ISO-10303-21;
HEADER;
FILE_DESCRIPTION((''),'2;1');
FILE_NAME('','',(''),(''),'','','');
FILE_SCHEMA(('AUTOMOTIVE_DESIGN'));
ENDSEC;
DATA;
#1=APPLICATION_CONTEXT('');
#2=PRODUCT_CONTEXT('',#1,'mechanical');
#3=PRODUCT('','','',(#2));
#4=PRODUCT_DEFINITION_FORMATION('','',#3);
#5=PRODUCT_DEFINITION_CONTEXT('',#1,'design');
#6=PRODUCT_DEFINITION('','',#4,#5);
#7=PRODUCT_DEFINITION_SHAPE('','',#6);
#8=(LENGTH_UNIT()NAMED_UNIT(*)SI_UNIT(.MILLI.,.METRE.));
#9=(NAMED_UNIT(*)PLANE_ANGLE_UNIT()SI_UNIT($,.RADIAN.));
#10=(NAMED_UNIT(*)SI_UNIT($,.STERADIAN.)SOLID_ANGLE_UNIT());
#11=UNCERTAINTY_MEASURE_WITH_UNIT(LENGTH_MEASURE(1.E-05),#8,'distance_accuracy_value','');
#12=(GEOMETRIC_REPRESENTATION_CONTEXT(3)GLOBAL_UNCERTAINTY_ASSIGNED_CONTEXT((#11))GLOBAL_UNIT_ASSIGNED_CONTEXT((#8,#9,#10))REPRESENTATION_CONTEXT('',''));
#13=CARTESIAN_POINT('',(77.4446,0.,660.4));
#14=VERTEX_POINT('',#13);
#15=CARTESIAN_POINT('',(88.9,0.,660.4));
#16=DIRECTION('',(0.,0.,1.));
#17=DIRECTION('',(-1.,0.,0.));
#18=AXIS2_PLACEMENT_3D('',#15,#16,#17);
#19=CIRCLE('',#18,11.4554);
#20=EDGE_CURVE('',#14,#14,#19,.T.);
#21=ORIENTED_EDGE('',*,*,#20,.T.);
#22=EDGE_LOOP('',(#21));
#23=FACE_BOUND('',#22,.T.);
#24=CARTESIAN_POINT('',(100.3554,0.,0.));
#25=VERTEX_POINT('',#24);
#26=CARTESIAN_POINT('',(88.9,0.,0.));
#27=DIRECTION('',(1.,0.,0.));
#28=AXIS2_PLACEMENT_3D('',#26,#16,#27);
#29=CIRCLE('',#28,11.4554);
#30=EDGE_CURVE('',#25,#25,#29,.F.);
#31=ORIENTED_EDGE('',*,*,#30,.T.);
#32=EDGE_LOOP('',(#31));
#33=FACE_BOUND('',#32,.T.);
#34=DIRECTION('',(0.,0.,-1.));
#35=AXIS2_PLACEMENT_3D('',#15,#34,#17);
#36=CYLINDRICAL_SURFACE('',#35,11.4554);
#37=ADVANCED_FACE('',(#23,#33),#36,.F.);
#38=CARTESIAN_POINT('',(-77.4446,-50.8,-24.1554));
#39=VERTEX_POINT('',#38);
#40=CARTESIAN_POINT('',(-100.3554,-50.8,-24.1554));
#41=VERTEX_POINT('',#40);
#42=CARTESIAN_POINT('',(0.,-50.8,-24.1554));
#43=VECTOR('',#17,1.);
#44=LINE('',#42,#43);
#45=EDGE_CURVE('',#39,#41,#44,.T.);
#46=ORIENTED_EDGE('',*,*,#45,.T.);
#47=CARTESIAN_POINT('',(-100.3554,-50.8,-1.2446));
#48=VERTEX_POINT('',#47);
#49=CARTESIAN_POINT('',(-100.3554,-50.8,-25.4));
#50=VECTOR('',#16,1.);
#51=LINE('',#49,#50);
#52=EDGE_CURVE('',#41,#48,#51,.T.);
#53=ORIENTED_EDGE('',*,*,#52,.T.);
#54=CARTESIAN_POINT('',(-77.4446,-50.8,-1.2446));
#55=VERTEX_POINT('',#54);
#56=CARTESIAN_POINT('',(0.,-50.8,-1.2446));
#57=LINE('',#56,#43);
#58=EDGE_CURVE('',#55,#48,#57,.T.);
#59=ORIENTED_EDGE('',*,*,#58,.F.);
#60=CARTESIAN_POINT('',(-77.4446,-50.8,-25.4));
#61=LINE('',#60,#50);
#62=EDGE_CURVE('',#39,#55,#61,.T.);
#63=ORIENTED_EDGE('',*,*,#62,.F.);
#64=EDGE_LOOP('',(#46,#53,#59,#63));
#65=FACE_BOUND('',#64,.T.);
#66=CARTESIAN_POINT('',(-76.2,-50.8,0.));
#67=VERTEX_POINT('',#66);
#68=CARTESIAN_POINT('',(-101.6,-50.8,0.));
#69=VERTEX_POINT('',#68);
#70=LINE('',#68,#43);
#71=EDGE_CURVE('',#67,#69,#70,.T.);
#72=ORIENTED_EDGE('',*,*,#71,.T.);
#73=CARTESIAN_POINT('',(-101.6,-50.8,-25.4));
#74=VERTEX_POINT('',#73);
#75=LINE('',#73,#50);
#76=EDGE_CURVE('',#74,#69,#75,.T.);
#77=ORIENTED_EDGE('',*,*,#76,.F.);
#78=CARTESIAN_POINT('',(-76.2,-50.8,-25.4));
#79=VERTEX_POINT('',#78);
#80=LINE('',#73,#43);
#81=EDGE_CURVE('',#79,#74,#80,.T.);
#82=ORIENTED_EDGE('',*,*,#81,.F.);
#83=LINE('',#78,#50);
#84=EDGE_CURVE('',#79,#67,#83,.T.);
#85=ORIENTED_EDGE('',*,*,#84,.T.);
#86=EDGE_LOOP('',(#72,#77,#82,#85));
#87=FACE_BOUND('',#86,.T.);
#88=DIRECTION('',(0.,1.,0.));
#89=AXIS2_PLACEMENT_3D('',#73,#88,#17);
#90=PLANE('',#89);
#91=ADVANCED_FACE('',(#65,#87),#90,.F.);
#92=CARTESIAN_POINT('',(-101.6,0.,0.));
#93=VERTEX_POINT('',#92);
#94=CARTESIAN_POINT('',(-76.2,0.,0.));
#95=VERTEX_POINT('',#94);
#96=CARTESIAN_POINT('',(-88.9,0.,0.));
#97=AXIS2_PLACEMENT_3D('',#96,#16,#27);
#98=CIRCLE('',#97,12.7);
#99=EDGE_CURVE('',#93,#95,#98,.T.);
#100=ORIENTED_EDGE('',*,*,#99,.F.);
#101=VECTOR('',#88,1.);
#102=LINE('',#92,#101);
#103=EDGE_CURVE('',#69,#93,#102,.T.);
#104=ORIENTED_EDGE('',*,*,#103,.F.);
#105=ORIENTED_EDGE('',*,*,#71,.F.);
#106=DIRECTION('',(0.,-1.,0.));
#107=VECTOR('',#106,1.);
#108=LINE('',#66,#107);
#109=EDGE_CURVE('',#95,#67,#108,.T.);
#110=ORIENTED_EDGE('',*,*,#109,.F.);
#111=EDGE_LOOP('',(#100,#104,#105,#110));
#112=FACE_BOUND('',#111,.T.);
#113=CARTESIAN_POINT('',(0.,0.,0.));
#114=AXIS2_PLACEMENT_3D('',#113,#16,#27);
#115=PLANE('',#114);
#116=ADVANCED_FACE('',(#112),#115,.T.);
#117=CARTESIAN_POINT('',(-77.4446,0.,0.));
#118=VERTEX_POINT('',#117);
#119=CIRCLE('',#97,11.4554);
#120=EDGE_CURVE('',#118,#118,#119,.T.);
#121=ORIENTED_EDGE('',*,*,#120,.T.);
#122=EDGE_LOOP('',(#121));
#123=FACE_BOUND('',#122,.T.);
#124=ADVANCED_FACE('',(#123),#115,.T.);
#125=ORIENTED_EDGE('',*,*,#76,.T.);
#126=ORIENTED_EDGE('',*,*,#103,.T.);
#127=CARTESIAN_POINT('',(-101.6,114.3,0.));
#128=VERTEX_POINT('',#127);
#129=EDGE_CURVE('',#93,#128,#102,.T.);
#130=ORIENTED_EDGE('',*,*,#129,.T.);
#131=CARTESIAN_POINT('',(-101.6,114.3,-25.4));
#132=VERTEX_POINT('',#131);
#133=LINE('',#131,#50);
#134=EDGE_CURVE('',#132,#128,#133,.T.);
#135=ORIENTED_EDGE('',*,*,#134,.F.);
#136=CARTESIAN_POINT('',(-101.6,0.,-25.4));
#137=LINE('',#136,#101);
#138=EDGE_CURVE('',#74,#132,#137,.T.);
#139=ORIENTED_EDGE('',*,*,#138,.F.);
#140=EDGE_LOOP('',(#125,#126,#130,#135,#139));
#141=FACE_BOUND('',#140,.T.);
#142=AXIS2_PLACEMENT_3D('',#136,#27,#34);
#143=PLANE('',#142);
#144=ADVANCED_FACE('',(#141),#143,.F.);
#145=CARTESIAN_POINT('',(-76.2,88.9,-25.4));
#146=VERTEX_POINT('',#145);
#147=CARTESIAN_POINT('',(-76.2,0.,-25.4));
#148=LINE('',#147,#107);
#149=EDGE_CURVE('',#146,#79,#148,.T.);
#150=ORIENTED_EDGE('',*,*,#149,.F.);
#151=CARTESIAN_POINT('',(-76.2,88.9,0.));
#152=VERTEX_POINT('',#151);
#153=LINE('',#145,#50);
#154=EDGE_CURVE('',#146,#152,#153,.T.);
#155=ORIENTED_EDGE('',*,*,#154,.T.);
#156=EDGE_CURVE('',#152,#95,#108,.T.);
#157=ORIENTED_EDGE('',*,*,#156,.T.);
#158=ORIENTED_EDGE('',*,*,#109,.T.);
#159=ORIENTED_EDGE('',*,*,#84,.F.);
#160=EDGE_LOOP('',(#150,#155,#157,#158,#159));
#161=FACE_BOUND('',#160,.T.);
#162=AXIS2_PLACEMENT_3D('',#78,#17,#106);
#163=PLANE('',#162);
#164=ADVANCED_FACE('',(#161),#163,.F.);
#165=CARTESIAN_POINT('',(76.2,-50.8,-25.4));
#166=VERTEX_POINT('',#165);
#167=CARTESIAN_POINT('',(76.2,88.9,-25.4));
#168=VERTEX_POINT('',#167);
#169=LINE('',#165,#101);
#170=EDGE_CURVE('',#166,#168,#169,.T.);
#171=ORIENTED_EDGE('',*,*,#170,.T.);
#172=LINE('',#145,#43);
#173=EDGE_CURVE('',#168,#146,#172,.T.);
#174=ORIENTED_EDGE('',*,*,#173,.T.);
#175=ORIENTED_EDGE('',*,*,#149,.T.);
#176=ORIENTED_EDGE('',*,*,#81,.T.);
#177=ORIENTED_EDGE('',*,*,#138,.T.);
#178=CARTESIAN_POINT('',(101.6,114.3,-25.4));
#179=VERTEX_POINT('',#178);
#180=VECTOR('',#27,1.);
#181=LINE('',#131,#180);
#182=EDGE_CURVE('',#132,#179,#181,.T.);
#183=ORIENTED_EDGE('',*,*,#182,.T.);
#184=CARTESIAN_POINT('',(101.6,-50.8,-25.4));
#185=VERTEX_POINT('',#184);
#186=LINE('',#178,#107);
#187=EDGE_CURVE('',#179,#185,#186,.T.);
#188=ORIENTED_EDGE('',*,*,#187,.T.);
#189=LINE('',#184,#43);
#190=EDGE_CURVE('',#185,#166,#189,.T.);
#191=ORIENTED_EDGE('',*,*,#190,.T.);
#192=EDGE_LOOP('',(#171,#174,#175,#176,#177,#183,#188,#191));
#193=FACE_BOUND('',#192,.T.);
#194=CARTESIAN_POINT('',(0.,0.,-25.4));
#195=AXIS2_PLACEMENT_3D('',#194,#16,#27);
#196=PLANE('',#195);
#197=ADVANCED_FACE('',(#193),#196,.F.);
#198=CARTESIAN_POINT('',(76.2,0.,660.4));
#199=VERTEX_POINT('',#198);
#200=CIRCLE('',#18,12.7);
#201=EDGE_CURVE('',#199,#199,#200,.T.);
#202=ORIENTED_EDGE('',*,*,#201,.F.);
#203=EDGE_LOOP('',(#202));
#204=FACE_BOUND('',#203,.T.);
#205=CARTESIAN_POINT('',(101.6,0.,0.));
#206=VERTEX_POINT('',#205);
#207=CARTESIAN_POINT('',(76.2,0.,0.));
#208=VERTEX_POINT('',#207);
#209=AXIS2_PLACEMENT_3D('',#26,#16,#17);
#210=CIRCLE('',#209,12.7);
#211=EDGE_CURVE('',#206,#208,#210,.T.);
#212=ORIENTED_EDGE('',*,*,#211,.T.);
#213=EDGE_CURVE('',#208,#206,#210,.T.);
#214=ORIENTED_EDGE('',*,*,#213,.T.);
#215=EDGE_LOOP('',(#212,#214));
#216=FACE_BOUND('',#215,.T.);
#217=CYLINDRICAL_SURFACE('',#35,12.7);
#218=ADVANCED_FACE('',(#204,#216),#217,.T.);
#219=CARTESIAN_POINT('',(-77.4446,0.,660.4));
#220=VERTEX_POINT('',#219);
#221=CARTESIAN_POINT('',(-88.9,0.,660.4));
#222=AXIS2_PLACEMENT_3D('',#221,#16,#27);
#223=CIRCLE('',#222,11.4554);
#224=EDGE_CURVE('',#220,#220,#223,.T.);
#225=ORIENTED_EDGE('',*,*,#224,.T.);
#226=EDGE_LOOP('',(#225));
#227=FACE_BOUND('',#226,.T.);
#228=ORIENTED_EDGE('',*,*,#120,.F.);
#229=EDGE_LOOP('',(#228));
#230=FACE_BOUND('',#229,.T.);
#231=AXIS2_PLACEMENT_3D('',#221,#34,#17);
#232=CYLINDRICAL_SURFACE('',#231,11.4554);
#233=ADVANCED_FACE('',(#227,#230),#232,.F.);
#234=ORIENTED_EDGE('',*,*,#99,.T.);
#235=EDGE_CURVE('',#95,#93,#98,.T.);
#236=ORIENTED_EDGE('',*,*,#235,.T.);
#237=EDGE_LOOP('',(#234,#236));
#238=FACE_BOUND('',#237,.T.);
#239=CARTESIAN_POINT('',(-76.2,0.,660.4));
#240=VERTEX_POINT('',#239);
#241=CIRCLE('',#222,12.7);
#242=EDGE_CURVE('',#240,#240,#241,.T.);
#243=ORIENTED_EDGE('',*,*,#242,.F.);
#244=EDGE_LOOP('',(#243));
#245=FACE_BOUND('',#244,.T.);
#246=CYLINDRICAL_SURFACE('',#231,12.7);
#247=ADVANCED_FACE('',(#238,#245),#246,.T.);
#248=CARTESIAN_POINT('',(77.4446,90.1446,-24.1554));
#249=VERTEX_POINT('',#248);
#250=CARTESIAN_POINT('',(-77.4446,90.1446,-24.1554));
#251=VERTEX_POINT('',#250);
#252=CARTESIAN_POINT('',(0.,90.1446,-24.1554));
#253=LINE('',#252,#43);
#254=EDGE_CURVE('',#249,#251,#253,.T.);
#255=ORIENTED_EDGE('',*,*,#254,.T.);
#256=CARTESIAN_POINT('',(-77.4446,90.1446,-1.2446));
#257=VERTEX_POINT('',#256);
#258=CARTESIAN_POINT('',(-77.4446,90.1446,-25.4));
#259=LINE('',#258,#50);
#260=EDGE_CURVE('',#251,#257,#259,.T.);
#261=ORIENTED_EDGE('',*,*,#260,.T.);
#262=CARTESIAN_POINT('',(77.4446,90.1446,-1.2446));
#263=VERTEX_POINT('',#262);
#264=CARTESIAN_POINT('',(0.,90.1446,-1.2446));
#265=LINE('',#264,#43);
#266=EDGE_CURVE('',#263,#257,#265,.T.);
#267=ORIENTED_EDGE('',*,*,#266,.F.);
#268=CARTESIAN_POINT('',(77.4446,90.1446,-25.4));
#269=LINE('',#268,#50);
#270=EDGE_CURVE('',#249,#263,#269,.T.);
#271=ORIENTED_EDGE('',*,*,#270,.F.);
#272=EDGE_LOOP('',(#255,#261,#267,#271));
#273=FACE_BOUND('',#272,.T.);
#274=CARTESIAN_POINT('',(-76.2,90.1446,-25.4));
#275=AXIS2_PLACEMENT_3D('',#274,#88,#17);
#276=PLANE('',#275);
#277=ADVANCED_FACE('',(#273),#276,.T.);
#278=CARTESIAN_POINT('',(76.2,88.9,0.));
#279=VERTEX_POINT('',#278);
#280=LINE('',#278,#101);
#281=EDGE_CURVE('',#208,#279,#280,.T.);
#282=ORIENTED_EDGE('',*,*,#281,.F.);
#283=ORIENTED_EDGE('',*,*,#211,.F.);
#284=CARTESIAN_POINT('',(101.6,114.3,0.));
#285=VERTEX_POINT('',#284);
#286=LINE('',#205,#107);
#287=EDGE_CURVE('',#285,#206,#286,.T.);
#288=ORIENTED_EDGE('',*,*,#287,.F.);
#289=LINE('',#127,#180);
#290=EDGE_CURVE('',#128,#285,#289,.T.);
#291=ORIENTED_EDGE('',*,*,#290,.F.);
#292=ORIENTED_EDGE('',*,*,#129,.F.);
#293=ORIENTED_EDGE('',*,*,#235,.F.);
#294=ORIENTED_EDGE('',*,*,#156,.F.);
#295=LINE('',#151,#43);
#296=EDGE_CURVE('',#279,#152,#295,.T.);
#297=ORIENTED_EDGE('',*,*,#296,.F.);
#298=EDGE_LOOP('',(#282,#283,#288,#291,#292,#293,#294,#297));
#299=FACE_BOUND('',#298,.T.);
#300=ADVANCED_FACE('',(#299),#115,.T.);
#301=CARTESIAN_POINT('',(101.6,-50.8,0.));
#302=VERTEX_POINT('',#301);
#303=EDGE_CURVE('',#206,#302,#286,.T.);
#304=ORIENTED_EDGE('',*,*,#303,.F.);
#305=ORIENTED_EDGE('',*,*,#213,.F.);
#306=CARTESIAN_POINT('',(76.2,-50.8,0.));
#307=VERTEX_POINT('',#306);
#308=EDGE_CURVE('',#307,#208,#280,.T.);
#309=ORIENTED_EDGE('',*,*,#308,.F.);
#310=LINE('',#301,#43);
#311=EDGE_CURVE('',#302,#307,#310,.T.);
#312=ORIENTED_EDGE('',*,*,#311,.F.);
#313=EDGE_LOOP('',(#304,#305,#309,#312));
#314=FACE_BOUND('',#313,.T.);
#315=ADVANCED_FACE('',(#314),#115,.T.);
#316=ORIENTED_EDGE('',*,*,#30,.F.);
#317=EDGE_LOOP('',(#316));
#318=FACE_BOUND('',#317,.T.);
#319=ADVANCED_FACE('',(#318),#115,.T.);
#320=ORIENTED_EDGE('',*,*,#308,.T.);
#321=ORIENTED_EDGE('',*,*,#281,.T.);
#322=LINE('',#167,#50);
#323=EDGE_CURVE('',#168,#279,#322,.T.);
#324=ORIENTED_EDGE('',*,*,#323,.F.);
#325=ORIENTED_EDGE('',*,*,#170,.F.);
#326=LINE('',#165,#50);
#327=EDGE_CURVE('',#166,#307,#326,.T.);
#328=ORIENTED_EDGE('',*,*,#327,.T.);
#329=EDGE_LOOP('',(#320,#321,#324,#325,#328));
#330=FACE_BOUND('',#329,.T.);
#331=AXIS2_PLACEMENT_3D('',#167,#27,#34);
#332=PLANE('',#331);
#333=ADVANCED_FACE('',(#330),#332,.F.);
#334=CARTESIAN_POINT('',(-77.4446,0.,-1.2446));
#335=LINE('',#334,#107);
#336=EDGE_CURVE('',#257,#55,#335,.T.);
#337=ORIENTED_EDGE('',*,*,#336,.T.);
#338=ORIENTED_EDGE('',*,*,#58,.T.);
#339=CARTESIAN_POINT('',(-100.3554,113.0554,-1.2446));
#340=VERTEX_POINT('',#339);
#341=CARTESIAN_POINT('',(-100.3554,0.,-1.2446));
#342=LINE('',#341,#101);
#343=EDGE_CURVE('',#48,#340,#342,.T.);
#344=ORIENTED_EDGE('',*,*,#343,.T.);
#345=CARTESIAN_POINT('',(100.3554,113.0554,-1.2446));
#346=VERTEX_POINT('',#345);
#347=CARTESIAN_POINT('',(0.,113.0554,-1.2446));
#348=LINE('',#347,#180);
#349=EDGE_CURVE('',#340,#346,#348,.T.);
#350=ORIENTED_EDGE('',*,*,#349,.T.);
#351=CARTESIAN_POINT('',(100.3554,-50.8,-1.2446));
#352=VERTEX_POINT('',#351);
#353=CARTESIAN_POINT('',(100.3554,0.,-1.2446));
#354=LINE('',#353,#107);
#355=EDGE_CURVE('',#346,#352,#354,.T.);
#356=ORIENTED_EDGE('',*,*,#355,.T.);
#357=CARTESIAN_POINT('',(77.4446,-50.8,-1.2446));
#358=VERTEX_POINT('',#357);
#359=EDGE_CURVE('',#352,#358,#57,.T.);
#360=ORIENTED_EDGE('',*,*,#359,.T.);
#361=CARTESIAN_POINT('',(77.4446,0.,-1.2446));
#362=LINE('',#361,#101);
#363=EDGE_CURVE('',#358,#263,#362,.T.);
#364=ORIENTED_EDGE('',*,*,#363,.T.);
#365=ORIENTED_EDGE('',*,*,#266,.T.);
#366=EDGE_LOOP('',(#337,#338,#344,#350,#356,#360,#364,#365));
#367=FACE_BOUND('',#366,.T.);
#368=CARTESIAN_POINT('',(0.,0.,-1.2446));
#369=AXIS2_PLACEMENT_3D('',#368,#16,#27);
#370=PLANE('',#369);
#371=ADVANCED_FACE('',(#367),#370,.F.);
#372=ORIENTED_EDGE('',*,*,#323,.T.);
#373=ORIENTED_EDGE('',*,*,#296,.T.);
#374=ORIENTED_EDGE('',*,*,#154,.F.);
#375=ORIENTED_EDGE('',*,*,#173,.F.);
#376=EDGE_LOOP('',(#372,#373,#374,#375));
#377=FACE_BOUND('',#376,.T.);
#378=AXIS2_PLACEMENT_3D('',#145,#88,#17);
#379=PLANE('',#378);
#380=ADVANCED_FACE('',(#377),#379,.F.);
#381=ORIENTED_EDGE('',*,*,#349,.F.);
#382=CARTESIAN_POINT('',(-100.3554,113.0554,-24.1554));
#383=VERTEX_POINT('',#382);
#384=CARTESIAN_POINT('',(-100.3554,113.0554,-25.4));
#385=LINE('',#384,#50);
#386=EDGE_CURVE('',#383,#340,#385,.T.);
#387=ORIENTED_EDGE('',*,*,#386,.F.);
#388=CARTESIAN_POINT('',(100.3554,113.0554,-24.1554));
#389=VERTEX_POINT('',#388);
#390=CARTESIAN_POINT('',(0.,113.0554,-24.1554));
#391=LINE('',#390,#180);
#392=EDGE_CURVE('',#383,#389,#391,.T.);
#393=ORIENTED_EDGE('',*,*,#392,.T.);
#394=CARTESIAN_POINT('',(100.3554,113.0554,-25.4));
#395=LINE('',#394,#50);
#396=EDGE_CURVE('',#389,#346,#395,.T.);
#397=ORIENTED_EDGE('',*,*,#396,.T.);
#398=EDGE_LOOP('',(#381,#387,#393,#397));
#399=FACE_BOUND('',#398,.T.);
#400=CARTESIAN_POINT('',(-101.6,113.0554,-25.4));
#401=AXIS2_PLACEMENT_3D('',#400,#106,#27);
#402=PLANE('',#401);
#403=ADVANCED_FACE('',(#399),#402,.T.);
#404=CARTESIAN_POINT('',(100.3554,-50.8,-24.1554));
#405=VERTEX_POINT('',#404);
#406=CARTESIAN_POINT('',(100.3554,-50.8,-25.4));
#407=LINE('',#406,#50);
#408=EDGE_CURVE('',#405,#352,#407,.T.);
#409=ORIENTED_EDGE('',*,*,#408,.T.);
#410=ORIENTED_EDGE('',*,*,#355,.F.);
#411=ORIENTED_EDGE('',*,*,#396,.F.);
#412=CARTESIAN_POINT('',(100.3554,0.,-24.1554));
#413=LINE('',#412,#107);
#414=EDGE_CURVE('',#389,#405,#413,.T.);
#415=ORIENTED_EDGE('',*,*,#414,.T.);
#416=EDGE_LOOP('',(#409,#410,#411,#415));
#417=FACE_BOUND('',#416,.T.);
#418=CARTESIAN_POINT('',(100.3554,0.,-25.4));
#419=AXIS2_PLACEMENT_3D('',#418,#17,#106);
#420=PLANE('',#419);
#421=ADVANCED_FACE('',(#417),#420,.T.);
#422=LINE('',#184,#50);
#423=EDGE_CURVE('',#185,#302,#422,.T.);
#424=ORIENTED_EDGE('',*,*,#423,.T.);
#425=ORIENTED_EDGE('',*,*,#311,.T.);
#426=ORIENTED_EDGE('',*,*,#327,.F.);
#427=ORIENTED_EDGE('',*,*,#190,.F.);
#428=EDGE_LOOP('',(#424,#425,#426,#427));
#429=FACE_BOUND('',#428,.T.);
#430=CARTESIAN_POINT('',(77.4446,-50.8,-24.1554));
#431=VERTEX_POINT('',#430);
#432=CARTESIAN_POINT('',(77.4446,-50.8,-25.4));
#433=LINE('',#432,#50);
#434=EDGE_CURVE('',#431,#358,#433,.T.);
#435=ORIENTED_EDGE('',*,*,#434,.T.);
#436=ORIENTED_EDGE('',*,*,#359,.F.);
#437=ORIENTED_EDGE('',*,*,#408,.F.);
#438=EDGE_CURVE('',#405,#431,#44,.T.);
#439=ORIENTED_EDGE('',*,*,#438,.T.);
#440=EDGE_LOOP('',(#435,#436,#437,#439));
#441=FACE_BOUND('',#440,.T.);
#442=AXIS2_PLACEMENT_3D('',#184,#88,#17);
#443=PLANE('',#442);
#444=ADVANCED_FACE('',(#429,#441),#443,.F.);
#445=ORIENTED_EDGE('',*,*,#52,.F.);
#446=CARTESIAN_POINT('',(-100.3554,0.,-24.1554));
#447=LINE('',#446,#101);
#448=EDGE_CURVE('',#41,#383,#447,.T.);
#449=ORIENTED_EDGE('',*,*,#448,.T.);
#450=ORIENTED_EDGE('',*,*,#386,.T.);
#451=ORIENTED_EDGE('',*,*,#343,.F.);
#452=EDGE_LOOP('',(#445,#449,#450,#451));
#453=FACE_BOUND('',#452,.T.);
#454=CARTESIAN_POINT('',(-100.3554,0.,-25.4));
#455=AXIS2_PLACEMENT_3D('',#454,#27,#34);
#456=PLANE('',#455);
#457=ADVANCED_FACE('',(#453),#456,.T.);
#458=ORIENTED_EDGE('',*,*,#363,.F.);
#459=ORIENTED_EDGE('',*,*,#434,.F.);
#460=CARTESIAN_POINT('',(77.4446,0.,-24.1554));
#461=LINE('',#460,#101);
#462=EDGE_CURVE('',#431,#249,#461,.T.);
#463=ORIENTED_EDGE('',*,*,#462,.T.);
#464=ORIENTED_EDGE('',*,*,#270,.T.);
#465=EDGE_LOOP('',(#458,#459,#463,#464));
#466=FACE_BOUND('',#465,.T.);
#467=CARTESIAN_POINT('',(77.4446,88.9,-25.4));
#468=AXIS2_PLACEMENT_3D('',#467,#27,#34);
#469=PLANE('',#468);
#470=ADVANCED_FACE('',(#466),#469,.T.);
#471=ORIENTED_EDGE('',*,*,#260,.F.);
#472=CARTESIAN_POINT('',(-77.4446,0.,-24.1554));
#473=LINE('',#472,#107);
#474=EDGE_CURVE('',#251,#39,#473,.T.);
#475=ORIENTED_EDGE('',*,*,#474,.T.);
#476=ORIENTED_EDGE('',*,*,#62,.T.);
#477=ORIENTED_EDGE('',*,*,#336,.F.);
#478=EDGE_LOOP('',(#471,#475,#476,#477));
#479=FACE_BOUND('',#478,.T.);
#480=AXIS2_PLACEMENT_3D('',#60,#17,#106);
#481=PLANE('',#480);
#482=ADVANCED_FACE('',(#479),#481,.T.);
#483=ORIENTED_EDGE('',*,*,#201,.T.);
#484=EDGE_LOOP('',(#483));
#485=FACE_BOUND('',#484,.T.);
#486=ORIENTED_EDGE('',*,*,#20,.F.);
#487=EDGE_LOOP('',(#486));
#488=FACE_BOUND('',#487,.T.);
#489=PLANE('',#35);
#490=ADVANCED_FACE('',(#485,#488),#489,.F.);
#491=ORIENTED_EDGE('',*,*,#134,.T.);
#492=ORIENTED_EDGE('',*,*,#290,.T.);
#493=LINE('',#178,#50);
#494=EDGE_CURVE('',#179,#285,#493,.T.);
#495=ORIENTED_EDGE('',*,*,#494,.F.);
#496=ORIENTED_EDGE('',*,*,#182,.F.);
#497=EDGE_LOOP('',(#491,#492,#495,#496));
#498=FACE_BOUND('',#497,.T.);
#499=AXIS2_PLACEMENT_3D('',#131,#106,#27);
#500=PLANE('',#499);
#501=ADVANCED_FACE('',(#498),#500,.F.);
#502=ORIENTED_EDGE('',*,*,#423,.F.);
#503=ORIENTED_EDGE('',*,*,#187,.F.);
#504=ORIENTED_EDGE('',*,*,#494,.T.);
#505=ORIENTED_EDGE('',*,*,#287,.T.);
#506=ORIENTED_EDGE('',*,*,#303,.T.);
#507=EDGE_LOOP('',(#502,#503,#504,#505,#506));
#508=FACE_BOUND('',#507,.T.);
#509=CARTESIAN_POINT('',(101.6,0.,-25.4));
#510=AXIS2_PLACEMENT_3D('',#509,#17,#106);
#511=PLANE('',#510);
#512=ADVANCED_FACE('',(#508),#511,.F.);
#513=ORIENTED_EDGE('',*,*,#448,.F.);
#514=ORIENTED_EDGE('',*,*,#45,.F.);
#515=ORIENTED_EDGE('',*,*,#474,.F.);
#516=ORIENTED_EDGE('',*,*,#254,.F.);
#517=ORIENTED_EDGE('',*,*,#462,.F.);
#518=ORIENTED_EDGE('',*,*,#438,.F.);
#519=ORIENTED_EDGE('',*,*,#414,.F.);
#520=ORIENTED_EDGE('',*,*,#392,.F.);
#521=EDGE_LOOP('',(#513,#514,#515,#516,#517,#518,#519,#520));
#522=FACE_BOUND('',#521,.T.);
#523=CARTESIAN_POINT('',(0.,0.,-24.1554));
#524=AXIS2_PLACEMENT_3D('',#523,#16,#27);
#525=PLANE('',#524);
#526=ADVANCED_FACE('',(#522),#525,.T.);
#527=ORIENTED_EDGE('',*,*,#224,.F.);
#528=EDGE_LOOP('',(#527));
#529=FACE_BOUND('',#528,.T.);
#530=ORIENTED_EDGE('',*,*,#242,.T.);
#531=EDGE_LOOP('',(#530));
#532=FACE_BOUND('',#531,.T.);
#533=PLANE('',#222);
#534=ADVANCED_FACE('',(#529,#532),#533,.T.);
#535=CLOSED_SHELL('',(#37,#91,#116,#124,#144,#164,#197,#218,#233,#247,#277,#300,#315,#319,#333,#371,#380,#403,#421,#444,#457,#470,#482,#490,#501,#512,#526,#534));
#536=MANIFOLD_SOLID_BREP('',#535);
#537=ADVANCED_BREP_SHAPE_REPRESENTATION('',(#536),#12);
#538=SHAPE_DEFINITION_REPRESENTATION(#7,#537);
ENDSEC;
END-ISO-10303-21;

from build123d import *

# Parameters (mm, degrees)
SKETCH1_R             = 12.7
SKETCH1_R_2           = 11.4554
BOSS_EXTRUDE1_DEPTH   = 660.4
BOSS_EXTRUDE1_2_DEPTH = 660.4
BOSS_EXTRUDE2_DEPTH   = 25.4
SHELL1_START          = -24.1554
SHELL1_DEPTH          = 22.9108


# Read off the part's stored shape, not the designer's step: Shell1
with BuildPart() as part:
    # Sketch1 → Boss-Extrude1 (new body)
    with BuildSketch(Plane.XY):
        with Locations((-88.9, 0)):
            Circle(SKETCH1_R)
        with Locations((-88.9, 0)):
            Circle(SKETCH1_R_2, mode=Mode.SUBTRACT)
    extrude(amount=BOSS_EXTRUDE1_DEPTH)



with BuildPart() as body_2:
    # Sketch1 → Boss-Extrude1 2 (new body)
    with BuildSketch(Plane.XY):
        with Locations(Location((88.9, 0, 0), (0, 0, 180))):
            Circle(SKETCH1_R)
        with Locations(Location((88.9, 0, 0), (0, 0, 180))):
            Circle(SKETCH1_R_2, mode=Mode.SUBTRACT)
    extrude(amount=BOSS_EXTRUDE1_2_DEPTH)


with BuildPart() as part_1:
    add(part.part)

    add(body_2.part)  # Boss-Extrude2 merges body 2
    # Sketch2 → Boss-Extrude2 (add)
    with BuildSketch(Plane(origin=(0, 0, 0), x_dir=(-1, 0, 0), z_dir=(0, 0, -1))):
        Polygon((101.6, 0), (101.6, 114.3), (-101.6, 114.3), (-101.6, 0), (-101.6, -50.8), (-76.2, -50.8), (-76.2, 0), (-76.2, 88.9), (76.2, 88.9), (76.2, 0), (76.2, -50.8), (101.6, -50.8), align=None)
    extrude(amount=BOSS_EXTRUDE2_DEPTH)

    # Shell1 outline → Shell1 (cut)
    with BuildSketch(Plane.XY.offset(SHELL1_START)):
        Polygon((-100.3554, 113.0554), (-100.3554, -50.8), (-77.4446, -50.8), (-77.4446, 90.1446), (77.4446, 90.1446), (77.4446, -50.8), (100.3554, -50.8), (100.3554, 113.0554), align=None)
    extrude(amount=SHELL1_DEPTH, mode=Mode.SUBTRACT)


solid = part_1.part
